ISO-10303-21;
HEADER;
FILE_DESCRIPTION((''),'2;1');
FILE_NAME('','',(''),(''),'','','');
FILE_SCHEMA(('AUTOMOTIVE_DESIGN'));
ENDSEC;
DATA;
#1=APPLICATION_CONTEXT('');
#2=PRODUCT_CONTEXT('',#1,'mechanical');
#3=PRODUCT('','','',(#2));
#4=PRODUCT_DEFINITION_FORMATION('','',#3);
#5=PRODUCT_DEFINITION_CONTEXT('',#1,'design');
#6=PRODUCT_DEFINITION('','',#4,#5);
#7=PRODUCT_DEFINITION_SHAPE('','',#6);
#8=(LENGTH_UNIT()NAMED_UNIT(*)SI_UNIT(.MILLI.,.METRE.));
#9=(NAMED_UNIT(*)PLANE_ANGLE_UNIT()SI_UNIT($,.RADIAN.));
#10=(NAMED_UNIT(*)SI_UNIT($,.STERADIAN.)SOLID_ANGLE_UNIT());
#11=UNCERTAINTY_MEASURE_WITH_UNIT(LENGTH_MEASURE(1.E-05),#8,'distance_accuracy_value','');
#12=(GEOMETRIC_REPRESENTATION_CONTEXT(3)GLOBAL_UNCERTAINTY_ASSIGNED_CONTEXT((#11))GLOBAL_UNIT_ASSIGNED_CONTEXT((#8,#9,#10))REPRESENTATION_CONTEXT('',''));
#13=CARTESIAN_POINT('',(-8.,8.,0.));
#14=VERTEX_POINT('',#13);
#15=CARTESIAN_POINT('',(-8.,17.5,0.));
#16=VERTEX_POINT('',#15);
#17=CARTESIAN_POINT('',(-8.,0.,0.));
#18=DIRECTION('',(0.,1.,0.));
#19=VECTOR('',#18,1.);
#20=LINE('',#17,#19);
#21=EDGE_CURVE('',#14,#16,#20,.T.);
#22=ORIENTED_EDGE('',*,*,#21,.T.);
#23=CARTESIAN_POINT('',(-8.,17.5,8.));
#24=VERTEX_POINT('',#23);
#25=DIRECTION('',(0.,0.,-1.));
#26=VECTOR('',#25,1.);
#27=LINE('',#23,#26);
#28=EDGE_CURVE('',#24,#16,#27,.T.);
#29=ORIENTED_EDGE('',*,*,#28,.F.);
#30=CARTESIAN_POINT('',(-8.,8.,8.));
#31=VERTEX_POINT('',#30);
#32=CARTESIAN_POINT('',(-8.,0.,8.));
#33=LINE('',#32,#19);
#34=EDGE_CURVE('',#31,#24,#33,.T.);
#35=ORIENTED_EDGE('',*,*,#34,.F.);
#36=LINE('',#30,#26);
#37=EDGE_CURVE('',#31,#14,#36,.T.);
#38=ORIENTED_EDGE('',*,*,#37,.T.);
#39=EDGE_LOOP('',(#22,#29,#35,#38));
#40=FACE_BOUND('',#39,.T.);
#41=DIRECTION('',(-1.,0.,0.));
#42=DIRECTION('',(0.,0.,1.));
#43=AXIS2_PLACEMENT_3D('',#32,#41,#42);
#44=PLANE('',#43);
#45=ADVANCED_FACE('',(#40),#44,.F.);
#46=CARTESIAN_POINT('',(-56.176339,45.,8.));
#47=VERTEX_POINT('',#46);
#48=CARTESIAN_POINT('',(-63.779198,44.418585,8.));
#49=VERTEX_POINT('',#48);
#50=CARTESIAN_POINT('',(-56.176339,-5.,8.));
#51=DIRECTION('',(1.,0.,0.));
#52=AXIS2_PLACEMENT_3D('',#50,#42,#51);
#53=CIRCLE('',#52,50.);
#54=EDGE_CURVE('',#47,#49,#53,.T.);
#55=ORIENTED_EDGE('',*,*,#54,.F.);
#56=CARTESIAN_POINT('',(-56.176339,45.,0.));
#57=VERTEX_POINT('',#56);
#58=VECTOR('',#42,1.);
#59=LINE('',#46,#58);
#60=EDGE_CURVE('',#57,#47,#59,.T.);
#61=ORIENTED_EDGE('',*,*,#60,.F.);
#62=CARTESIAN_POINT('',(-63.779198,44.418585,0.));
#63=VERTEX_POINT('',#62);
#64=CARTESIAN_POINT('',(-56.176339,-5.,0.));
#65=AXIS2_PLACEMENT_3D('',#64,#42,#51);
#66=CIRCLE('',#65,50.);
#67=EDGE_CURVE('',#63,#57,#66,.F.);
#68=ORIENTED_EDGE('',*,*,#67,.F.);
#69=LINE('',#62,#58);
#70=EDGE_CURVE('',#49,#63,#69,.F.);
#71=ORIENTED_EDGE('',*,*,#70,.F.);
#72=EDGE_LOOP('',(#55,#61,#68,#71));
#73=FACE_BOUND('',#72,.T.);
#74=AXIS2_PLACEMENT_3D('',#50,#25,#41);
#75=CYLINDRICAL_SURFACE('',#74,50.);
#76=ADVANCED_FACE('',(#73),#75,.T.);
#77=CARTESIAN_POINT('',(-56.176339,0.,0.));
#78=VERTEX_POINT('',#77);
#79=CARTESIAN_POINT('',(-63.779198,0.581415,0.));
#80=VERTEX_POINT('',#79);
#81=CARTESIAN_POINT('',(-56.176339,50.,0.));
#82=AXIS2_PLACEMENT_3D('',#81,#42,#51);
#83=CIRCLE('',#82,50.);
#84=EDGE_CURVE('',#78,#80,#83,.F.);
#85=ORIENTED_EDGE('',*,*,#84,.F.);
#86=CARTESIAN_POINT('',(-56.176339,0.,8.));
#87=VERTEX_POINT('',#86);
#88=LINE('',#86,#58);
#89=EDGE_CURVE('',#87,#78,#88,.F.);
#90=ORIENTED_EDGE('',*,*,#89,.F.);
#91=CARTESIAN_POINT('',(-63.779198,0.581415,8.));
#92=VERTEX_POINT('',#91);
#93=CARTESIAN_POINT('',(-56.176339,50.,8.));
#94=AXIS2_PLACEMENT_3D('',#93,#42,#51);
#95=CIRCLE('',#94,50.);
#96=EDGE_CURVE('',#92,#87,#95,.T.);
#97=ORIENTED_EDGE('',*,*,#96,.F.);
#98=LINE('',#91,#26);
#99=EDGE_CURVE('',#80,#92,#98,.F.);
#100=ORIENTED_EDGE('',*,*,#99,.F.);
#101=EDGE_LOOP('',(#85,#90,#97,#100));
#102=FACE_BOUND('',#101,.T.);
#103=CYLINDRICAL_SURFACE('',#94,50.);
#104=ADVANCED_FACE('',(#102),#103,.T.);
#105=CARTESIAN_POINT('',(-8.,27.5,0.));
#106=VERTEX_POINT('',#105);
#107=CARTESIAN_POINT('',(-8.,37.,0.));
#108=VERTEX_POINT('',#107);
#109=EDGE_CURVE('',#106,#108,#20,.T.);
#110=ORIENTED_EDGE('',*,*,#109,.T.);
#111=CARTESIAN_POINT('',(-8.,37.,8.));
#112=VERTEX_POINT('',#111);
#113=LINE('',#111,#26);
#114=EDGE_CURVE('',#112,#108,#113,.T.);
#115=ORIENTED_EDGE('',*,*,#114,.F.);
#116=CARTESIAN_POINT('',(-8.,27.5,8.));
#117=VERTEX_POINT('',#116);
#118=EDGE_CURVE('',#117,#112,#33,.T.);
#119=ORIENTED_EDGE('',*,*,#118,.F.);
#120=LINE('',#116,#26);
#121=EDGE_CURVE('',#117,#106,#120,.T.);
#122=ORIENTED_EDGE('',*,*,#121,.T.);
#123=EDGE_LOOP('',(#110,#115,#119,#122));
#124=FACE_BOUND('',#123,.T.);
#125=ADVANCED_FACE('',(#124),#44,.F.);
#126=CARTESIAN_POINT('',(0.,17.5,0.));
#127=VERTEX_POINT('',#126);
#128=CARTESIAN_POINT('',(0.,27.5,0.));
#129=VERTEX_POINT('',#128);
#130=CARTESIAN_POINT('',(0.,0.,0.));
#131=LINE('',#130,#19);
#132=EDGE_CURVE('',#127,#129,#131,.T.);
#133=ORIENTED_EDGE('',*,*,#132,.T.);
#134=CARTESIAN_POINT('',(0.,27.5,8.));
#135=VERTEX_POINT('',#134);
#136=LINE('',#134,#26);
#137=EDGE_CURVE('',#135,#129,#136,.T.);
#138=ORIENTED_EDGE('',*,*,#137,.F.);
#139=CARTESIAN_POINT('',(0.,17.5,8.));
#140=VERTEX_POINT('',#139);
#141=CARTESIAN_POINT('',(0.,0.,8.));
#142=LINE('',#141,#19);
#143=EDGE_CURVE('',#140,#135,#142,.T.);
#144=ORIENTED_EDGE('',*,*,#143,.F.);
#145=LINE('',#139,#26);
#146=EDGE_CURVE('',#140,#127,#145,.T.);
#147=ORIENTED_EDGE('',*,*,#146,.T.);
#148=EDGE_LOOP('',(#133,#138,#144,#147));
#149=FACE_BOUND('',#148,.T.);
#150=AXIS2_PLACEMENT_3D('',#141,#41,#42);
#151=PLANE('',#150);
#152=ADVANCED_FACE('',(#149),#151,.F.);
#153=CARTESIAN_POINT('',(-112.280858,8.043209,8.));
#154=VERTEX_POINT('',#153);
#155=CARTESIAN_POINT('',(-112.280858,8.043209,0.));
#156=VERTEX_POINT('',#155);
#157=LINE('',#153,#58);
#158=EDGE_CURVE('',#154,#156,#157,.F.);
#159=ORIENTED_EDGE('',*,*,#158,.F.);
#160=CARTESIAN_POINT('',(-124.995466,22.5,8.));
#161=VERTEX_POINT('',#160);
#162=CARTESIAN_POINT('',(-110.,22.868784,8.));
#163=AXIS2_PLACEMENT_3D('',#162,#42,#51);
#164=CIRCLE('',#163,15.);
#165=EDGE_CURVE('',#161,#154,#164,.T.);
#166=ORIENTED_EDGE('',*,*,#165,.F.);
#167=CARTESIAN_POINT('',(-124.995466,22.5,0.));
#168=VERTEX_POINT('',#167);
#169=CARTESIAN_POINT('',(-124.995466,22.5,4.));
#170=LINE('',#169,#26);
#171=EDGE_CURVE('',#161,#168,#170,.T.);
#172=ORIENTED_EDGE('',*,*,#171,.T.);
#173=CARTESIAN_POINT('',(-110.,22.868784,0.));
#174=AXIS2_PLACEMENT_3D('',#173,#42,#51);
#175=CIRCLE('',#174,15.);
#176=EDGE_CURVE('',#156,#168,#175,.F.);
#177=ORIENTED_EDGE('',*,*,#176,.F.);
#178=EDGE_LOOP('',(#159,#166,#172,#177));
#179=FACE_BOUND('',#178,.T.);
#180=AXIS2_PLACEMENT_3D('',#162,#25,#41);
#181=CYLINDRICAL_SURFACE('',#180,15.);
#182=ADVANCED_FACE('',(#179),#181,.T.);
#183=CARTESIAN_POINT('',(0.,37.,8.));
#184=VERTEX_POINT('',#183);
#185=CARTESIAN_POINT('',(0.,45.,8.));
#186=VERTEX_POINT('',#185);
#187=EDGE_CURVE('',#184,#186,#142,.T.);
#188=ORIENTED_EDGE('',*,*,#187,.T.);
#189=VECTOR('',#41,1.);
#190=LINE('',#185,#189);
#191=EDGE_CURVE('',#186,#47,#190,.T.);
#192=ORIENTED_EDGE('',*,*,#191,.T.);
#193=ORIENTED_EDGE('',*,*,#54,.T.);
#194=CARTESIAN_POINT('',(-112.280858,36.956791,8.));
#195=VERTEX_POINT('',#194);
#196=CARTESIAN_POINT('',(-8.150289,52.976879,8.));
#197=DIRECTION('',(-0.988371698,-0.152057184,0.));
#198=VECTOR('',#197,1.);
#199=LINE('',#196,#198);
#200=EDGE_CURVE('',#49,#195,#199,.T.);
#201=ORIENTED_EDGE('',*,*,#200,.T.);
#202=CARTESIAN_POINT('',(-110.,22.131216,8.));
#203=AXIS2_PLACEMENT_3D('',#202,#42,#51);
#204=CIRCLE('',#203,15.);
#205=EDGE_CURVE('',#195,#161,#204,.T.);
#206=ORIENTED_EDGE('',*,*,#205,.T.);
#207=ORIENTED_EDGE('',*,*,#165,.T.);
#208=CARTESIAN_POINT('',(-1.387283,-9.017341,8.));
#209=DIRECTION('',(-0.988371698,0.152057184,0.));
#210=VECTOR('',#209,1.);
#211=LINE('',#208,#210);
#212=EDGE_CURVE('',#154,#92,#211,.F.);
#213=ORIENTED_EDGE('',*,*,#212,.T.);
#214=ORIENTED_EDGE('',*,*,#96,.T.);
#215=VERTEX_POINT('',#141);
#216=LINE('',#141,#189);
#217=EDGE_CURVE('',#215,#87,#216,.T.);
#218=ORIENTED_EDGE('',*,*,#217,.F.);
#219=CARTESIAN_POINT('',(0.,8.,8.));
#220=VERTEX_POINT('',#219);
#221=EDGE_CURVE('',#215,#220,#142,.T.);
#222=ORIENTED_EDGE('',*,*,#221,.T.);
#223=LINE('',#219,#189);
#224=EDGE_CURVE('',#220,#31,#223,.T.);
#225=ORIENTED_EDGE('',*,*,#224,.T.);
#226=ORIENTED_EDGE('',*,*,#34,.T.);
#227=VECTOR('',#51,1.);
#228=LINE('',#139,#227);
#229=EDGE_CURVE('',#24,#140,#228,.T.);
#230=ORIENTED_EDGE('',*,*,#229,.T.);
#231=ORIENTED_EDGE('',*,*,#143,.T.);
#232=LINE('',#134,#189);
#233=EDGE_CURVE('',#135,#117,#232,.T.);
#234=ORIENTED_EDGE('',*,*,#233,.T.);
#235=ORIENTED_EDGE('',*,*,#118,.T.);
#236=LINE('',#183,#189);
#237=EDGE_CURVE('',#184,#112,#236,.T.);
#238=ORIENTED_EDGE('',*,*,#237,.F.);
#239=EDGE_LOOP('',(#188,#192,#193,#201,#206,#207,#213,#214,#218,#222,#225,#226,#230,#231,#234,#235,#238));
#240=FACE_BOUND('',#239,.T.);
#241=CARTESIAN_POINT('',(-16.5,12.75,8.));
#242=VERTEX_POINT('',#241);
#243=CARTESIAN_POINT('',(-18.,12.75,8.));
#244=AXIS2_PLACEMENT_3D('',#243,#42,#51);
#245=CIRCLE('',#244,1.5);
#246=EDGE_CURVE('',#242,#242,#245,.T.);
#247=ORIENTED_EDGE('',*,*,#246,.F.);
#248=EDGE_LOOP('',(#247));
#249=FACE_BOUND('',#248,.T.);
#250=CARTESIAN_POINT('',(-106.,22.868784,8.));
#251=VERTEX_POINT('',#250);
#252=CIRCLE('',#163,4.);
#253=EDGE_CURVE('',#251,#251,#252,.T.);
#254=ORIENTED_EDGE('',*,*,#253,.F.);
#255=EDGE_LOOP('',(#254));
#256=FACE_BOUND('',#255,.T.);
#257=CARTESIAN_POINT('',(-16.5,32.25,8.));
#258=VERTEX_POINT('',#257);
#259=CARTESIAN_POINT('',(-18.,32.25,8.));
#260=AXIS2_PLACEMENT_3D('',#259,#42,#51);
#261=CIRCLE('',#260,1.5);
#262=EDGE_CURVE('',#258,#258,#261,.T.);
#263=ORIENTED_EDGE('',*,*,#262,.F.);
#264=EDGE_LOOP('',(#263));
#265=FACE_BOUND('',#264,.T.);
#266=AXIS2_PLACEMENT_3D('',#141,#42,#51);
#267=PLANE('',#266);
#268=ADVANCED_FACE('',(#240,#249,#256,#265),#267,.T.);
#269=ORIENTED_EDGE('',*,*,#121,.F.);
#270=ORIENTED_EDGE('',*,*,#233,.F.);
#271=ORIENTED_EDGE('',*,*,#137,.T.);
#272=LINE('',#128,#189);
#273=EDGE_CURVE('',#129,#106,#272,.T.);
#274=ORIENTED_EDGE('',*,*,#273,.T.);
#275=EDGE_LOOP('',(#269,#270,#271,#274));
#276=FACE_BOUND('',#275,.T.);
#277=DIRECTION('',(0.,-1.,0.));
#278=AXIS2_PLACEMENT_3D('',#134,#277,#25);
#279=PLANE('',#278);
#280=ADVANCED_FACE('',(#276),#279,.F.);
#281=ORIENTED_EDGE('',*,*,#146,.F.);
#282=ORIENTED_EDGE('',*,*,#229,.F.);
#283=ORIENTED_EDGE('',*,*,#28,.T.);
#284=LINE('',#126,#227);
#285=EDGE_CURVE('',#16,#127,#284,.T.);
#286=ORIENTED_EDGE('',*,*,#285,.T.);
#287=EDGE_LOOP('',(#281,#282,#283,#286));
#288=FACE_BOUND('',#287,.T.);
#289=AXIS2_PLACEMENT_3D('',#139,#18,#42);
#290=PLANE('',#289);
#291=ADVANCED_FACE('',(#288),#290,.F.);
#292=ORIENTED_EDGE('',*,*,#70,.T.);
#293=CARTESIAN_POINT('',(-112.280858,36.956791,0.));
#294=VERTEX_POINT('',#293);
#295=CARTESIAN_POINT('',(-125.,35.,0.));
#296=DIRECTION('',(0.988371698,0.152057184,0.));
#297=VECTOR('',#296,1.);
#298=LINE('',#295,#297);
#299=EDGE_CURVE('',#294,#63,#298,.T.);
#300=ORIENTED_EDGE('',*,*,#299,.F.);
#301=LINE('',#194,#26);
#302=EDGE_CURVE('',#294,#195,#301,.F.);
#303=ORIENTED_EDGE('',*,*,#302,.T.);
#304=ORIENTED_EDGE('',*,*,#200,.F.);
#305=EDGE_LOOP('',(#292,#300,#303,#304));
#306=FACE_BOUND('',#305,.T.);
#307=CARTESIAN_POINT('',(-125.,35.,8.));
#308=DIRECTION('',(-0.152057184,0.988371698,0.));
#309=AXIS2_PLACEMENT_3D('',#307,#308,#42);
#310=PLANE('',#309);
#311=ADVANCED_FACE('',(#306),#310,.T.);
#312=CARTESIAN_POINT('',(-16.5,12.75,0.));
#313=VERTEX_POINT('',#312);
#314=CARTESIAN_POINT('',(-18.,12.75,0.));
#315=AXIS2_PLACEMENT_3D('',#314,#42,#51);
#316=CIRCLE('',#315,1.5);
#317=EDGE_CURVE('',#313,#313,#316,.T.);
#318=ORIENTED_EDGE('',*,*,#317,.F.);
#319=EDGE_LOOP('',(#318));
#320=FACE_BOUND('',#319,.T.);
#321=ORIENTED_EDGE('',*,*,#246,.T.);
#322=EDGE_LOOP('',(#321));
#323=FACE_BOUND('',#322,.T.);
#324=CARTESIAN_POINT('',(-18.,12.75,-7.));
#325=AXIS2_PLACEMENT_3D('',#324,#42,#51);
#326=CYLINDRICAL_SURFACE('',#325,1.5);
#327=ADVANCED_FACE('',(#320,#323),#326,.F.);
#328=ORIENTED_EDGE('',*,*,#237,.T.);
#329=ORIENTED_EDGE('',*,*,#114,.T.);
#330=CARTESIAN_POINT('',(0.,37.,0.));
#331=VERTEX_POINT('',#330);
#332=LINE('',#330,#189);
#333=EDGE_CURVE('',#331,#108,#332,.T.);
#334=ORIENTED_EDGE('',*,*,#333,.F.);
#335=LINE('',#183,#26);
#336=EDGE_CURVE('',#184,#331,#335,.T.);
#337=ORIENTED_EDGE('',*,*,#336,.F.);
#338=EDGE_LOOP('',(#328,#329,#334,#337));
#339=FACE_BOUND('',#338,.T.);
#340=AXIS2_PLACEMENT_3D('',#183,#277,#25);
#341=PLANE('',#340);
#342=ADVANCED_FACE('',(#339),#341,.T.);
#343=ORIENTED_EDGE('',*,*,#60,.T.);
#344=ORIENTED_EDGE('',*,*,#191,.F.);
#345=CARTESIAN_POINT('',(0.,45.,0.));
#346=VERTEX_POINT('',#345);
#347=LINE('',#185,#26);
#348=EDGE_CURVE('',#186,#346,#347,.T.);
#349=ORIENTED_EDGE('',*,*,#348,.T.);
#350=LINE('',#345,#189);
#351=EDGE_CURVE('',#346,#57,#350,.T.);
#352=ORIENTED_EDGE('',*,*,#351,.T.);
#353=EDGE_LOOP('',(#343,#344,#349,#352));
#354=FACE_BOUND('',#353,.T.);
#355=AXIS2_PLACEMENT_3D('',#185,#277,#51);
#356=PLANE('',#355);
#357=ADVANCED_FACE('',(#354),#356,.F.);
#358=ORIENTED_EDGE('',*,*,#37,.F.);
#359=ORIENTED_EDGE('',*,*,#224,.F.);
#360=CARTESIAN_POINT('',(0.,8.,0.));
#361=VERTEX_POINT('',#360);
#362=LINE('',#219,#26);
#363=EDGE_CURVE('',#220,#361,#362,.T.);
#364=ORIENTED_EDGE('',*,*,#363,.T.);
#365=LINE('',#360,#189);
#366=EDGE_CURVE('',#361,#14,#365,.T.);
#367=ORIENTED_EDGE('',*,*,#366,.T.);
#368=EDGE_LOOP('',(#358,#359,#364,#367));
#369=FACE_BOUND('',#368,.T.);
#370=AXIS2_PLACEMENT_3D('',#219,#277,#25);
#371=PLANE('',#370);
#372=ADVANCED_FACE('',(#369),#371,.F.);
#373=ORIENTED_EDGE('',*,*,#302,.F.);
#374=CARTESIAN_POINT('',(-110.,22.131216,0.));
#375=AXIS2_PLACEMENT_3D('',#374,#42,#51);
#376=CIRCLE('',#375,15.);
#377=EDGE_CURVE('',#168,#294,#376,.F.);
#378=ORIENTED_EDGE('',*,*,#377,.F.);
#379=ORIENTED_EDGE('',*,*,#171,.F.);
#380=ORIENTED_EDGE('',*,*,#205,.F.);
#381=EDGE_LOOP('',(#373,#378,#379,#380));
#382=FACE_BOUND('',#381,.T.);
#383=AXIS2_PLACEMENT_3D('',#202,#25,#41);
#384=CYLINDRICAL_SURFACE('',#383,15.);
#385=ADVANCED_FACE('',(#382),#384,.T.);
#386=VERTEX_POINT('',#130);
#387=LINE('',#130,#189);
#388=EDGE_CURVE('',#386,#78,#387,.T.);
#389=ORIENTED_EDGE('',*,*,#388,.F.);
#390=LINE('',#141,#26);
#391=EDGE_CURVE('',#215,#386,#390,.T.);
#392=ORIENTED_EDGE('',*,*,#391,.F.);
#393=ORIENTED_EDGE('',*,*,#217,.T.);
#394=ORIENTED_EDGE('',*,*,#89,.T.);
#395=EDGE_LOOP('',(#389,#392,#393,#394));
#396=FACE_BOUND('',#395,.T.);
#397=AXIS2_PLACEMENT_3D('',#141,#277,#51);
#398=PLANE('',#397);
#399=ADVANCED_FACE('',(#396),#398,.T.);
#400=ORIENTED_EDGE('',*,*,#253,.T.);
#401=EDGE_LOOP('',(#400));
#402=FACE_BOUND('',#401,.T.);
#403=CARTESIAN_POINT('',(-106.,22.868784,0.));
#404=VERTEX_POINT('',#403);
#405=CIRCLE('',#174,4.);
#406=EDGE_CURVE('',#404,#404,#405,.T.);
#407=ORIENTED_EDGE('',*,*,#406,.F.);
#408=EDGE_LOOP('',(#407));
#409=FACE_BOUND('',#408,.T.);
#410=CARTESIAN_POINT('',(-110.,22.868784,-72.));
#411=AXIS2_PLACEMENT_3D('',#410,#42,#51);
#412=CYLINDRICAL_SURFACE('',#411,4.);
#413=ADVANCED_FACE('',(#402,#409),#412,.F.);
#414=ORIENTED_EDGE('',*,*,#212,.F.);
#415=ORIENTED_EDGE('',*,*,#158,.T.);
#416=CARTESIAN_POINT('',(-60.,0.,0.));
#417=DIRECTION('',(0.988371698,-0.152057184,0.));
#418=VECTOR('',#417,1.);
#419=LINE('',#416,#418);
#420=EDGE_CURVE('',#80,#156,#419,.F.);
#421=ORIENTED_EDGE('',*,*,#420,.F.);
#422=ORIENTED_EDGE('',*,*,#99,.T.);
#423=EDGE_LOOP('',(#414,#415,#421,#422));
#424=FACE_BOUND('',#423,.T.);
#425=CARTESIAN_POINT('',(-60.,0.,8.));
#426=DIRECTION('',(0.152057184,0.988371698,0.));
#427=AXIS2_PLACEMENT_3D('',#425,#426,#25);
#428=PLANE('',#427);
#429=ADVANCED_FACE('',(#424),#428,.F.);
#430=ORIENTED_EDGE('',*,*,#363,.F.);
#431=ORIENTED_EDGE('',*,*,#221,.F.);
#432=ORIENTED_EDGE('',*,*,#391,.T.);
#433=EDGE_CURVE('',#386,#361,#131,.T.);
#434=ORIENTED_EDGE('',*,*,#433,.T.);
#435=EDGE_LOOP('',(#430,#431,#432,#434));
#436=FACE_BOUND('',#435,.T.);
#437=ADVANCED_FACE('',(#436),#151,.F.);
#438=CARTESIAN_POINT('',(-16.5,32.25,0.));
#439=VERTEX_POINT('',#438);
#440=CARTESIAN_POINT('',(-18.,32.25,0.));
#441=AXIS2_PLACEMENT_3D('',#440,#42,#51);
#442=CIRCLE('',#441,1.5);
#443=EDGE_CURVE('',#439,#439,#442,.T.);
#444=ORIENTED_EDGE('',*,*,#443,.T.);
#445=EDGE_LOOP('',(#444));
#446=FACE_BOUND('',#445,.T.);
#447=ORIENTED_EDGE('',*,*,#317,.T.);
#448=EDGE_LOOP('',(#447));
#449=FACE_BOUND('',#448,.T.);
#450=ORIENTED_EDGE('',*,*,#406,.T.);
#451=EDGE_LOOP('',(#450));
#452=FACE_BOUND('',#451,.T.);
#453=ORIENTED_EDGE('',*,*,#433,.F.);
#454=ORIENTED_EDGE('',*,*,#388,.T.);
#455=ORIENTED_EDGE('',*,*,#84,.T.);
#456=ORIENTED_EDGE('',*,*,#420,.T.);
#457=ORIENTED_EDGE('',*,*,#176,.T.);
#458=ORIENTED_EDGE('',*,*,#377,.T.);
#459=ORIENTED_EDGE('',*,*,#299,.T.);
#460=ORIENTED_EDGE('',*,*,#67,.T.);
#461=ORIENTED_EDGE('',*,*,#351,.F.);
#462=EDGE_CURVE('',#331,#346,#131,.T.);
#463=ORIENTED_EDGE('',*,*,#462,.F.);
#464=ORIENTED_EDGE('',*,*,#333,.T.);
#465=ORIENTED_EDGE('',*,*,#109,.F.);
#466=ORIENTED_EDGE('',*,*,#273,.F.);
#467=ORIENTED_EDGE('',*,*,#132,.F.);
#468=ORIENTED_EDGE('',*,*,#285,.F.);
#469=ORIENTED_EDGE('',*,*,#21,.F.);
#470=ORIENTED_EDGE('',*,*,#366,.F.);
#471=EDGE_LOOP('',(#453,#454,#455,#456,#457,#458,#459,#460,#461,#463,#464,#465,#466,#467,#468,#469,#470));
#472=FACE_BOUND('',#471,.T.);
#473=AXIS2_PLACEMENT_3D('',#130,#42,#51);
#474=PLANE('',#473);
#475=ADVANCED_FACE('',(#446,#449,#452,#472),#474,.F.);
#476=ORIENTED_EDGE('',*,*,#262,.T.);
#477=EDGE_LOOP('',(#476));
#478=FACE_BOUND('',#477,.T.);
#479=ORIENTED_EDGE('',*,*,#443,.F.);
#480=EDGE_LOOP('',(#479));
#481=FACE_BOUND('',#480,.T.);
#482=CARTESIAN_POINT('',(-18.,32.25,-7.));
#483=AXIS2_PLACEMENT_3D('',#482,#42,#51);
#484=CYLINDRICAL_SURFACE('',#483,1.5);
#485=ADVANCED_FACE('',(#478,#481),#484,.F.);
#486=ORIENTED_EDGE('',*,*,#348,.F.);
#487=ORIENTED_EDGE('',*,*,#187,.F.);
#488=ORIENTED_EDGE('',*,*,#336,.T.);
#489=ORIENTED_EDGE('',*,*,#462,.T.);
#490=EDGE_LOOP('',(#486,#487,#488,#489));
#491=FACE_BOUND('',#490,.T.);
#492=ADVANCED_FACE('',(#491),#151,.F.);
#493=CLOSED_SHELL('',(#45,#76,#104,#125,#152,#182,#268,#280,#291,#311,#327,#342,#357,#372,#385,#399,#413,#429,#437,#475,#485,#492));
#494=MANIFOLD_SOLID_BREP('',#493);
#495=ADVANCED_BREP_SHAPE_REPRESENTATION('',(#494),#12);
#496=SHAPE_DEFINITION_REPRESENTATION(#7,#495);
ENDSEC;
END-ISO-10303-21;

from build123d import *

# Parameters (mm, degrees)
BOSS_EXTRUDE1_DEPTH = 8
CHAMFER1_SIZE       = 10
CHAMFER1_SIZE2      = 65
CHAMFER2_SIZE       = 65
CHAMFER2_SIZE2      = 10
FILLET2_R           = 15
FILLET3_R           = 50
SKETCH2_R           = 4
CUT_EXTRUDE1_DEPTH  = 80
SKETCH4_R           = 1.5
CUT_EXTRUDE3_DEPTH  = 15


with BuildPart() as part:
    # Sketch1 → Boss-Extrude1 (new body)
    with BuildSketch(Plane.XY):
        Polygon((0, 17.5), (0, 27.5), (-8, 27.5), (-8, 37), (0, 37), (0, 45), (-125, 45), (-125, 22.5), (-125, 0), (0, 0), (0, 8), (-8, 8), (-8, 17.5), align=None)
    extrude(amount=BOSS_EXTRUDE1_DEPTH)

    # Chamfer1
    chamfer1_edges = [part.edges().sort_by_distance(p)[0] for p in [
        (-125, 0, 4),
    ]]
    chamfer1_side = [part.faces().sort_by_distance(p)[0] for p in [
        (-125, 22.5, 4),
    ]]
    chamfer(chamfer1_edges, length=CHAMFER1_SIZE, length2=CHAMFER1_SIZE2, reference=chamfer1_side[0])

    # Chamfer2
    chamfer2_edges = [part.edges().sort_by_distance(p)[0] for p in [
        (-125, 45, 4),
    ]]
    chamfer2_side = [part.faces().sort_by_distance(p)[0] for p in [
        (-62.5, 45, 4),
    ]]
    chamfer(chamfer2_edges, length=CHAMFER2_SIZE, length2=CHAMFER2_SIZE2, reference=chamfer2_side[0])

    # Fillet2
    # the kernel refuses this fillet: 15 mm, written as the material it takes off along each edge
    with BuildSketch(Plane(origin=(-125, 10, -32.171960879), x_dir=(0, 1, 0), z_dir=(0, 0, 1))) as fillet2_piece_1:
        with BuildLine():
            CenterArc((FILLET2_R * 0.857918956767, -FILLET2_R), FILLET2_R, 90, 81.253837737)
            Line((-FILLET2_R * 0.130452740884, -FILLET2_R * 0.847942815746), (0, 0))
            Line((0, 0), (FILLET2_R * 0.857918956767, 0))
        make_face()
    extrude(amount=72.343921757, mode=Mode.SUBTRACT)
    with BuildSketch(Plane(origin=(-125, 35, -32.171960879), x_dir=(0, -1, 0), z_dir=(0, 0, 1))) as fillet2_piece_2:
        with BuildLine():
            CenterArc((FILLET2_R * 0.857918956767, FILLET2_R), FILLET2_R, 188.746162263, 81.253837737)
            Line((-FILLET2_R * 0.130452740884, FILLET2_R * 0.847942815746), (0, 0))
            Line((0, 0), (FILLET2_R * 0.857918956767, 0))
        make_face()
    extrude(amount=72.343921757, mode=Mode.SUBTRACT)

    # Fillet3
    fillet3_edges = [part.edges().sort_by_distance(p)[0] for p in [
        (-60, 0, 4),
        (-60, 45, 4),
    ]]
    fillet(fillet3_edges, radius=FILLET3_R)

    # Sketch2 → Cut-Extrude1 (cut)
    with BuildSketch(Plane.XY.offset(8)):
        with Locations((-110, 22.868784351)):
            Circle(SKETCH2_R)
    extrude(amount=-CUT_EXTRUDE1_DEPTH, mode=Mode.SUBTRACT)

    # Sketch4 → Cut-Extrude3 (cut)
    with BuildSketch(Plane.XY.offset(8)):
        with Locations((-18, 32.25)):
            Circle(SKETCH4_R)
        with Locations((-18, 12.75)):
            Circle(SKETCH4_R)
    extrude(amount=-CUT_EXTRUDE3_DEPTH, mode=Mode.SUBTRACT)


solid = part.part
